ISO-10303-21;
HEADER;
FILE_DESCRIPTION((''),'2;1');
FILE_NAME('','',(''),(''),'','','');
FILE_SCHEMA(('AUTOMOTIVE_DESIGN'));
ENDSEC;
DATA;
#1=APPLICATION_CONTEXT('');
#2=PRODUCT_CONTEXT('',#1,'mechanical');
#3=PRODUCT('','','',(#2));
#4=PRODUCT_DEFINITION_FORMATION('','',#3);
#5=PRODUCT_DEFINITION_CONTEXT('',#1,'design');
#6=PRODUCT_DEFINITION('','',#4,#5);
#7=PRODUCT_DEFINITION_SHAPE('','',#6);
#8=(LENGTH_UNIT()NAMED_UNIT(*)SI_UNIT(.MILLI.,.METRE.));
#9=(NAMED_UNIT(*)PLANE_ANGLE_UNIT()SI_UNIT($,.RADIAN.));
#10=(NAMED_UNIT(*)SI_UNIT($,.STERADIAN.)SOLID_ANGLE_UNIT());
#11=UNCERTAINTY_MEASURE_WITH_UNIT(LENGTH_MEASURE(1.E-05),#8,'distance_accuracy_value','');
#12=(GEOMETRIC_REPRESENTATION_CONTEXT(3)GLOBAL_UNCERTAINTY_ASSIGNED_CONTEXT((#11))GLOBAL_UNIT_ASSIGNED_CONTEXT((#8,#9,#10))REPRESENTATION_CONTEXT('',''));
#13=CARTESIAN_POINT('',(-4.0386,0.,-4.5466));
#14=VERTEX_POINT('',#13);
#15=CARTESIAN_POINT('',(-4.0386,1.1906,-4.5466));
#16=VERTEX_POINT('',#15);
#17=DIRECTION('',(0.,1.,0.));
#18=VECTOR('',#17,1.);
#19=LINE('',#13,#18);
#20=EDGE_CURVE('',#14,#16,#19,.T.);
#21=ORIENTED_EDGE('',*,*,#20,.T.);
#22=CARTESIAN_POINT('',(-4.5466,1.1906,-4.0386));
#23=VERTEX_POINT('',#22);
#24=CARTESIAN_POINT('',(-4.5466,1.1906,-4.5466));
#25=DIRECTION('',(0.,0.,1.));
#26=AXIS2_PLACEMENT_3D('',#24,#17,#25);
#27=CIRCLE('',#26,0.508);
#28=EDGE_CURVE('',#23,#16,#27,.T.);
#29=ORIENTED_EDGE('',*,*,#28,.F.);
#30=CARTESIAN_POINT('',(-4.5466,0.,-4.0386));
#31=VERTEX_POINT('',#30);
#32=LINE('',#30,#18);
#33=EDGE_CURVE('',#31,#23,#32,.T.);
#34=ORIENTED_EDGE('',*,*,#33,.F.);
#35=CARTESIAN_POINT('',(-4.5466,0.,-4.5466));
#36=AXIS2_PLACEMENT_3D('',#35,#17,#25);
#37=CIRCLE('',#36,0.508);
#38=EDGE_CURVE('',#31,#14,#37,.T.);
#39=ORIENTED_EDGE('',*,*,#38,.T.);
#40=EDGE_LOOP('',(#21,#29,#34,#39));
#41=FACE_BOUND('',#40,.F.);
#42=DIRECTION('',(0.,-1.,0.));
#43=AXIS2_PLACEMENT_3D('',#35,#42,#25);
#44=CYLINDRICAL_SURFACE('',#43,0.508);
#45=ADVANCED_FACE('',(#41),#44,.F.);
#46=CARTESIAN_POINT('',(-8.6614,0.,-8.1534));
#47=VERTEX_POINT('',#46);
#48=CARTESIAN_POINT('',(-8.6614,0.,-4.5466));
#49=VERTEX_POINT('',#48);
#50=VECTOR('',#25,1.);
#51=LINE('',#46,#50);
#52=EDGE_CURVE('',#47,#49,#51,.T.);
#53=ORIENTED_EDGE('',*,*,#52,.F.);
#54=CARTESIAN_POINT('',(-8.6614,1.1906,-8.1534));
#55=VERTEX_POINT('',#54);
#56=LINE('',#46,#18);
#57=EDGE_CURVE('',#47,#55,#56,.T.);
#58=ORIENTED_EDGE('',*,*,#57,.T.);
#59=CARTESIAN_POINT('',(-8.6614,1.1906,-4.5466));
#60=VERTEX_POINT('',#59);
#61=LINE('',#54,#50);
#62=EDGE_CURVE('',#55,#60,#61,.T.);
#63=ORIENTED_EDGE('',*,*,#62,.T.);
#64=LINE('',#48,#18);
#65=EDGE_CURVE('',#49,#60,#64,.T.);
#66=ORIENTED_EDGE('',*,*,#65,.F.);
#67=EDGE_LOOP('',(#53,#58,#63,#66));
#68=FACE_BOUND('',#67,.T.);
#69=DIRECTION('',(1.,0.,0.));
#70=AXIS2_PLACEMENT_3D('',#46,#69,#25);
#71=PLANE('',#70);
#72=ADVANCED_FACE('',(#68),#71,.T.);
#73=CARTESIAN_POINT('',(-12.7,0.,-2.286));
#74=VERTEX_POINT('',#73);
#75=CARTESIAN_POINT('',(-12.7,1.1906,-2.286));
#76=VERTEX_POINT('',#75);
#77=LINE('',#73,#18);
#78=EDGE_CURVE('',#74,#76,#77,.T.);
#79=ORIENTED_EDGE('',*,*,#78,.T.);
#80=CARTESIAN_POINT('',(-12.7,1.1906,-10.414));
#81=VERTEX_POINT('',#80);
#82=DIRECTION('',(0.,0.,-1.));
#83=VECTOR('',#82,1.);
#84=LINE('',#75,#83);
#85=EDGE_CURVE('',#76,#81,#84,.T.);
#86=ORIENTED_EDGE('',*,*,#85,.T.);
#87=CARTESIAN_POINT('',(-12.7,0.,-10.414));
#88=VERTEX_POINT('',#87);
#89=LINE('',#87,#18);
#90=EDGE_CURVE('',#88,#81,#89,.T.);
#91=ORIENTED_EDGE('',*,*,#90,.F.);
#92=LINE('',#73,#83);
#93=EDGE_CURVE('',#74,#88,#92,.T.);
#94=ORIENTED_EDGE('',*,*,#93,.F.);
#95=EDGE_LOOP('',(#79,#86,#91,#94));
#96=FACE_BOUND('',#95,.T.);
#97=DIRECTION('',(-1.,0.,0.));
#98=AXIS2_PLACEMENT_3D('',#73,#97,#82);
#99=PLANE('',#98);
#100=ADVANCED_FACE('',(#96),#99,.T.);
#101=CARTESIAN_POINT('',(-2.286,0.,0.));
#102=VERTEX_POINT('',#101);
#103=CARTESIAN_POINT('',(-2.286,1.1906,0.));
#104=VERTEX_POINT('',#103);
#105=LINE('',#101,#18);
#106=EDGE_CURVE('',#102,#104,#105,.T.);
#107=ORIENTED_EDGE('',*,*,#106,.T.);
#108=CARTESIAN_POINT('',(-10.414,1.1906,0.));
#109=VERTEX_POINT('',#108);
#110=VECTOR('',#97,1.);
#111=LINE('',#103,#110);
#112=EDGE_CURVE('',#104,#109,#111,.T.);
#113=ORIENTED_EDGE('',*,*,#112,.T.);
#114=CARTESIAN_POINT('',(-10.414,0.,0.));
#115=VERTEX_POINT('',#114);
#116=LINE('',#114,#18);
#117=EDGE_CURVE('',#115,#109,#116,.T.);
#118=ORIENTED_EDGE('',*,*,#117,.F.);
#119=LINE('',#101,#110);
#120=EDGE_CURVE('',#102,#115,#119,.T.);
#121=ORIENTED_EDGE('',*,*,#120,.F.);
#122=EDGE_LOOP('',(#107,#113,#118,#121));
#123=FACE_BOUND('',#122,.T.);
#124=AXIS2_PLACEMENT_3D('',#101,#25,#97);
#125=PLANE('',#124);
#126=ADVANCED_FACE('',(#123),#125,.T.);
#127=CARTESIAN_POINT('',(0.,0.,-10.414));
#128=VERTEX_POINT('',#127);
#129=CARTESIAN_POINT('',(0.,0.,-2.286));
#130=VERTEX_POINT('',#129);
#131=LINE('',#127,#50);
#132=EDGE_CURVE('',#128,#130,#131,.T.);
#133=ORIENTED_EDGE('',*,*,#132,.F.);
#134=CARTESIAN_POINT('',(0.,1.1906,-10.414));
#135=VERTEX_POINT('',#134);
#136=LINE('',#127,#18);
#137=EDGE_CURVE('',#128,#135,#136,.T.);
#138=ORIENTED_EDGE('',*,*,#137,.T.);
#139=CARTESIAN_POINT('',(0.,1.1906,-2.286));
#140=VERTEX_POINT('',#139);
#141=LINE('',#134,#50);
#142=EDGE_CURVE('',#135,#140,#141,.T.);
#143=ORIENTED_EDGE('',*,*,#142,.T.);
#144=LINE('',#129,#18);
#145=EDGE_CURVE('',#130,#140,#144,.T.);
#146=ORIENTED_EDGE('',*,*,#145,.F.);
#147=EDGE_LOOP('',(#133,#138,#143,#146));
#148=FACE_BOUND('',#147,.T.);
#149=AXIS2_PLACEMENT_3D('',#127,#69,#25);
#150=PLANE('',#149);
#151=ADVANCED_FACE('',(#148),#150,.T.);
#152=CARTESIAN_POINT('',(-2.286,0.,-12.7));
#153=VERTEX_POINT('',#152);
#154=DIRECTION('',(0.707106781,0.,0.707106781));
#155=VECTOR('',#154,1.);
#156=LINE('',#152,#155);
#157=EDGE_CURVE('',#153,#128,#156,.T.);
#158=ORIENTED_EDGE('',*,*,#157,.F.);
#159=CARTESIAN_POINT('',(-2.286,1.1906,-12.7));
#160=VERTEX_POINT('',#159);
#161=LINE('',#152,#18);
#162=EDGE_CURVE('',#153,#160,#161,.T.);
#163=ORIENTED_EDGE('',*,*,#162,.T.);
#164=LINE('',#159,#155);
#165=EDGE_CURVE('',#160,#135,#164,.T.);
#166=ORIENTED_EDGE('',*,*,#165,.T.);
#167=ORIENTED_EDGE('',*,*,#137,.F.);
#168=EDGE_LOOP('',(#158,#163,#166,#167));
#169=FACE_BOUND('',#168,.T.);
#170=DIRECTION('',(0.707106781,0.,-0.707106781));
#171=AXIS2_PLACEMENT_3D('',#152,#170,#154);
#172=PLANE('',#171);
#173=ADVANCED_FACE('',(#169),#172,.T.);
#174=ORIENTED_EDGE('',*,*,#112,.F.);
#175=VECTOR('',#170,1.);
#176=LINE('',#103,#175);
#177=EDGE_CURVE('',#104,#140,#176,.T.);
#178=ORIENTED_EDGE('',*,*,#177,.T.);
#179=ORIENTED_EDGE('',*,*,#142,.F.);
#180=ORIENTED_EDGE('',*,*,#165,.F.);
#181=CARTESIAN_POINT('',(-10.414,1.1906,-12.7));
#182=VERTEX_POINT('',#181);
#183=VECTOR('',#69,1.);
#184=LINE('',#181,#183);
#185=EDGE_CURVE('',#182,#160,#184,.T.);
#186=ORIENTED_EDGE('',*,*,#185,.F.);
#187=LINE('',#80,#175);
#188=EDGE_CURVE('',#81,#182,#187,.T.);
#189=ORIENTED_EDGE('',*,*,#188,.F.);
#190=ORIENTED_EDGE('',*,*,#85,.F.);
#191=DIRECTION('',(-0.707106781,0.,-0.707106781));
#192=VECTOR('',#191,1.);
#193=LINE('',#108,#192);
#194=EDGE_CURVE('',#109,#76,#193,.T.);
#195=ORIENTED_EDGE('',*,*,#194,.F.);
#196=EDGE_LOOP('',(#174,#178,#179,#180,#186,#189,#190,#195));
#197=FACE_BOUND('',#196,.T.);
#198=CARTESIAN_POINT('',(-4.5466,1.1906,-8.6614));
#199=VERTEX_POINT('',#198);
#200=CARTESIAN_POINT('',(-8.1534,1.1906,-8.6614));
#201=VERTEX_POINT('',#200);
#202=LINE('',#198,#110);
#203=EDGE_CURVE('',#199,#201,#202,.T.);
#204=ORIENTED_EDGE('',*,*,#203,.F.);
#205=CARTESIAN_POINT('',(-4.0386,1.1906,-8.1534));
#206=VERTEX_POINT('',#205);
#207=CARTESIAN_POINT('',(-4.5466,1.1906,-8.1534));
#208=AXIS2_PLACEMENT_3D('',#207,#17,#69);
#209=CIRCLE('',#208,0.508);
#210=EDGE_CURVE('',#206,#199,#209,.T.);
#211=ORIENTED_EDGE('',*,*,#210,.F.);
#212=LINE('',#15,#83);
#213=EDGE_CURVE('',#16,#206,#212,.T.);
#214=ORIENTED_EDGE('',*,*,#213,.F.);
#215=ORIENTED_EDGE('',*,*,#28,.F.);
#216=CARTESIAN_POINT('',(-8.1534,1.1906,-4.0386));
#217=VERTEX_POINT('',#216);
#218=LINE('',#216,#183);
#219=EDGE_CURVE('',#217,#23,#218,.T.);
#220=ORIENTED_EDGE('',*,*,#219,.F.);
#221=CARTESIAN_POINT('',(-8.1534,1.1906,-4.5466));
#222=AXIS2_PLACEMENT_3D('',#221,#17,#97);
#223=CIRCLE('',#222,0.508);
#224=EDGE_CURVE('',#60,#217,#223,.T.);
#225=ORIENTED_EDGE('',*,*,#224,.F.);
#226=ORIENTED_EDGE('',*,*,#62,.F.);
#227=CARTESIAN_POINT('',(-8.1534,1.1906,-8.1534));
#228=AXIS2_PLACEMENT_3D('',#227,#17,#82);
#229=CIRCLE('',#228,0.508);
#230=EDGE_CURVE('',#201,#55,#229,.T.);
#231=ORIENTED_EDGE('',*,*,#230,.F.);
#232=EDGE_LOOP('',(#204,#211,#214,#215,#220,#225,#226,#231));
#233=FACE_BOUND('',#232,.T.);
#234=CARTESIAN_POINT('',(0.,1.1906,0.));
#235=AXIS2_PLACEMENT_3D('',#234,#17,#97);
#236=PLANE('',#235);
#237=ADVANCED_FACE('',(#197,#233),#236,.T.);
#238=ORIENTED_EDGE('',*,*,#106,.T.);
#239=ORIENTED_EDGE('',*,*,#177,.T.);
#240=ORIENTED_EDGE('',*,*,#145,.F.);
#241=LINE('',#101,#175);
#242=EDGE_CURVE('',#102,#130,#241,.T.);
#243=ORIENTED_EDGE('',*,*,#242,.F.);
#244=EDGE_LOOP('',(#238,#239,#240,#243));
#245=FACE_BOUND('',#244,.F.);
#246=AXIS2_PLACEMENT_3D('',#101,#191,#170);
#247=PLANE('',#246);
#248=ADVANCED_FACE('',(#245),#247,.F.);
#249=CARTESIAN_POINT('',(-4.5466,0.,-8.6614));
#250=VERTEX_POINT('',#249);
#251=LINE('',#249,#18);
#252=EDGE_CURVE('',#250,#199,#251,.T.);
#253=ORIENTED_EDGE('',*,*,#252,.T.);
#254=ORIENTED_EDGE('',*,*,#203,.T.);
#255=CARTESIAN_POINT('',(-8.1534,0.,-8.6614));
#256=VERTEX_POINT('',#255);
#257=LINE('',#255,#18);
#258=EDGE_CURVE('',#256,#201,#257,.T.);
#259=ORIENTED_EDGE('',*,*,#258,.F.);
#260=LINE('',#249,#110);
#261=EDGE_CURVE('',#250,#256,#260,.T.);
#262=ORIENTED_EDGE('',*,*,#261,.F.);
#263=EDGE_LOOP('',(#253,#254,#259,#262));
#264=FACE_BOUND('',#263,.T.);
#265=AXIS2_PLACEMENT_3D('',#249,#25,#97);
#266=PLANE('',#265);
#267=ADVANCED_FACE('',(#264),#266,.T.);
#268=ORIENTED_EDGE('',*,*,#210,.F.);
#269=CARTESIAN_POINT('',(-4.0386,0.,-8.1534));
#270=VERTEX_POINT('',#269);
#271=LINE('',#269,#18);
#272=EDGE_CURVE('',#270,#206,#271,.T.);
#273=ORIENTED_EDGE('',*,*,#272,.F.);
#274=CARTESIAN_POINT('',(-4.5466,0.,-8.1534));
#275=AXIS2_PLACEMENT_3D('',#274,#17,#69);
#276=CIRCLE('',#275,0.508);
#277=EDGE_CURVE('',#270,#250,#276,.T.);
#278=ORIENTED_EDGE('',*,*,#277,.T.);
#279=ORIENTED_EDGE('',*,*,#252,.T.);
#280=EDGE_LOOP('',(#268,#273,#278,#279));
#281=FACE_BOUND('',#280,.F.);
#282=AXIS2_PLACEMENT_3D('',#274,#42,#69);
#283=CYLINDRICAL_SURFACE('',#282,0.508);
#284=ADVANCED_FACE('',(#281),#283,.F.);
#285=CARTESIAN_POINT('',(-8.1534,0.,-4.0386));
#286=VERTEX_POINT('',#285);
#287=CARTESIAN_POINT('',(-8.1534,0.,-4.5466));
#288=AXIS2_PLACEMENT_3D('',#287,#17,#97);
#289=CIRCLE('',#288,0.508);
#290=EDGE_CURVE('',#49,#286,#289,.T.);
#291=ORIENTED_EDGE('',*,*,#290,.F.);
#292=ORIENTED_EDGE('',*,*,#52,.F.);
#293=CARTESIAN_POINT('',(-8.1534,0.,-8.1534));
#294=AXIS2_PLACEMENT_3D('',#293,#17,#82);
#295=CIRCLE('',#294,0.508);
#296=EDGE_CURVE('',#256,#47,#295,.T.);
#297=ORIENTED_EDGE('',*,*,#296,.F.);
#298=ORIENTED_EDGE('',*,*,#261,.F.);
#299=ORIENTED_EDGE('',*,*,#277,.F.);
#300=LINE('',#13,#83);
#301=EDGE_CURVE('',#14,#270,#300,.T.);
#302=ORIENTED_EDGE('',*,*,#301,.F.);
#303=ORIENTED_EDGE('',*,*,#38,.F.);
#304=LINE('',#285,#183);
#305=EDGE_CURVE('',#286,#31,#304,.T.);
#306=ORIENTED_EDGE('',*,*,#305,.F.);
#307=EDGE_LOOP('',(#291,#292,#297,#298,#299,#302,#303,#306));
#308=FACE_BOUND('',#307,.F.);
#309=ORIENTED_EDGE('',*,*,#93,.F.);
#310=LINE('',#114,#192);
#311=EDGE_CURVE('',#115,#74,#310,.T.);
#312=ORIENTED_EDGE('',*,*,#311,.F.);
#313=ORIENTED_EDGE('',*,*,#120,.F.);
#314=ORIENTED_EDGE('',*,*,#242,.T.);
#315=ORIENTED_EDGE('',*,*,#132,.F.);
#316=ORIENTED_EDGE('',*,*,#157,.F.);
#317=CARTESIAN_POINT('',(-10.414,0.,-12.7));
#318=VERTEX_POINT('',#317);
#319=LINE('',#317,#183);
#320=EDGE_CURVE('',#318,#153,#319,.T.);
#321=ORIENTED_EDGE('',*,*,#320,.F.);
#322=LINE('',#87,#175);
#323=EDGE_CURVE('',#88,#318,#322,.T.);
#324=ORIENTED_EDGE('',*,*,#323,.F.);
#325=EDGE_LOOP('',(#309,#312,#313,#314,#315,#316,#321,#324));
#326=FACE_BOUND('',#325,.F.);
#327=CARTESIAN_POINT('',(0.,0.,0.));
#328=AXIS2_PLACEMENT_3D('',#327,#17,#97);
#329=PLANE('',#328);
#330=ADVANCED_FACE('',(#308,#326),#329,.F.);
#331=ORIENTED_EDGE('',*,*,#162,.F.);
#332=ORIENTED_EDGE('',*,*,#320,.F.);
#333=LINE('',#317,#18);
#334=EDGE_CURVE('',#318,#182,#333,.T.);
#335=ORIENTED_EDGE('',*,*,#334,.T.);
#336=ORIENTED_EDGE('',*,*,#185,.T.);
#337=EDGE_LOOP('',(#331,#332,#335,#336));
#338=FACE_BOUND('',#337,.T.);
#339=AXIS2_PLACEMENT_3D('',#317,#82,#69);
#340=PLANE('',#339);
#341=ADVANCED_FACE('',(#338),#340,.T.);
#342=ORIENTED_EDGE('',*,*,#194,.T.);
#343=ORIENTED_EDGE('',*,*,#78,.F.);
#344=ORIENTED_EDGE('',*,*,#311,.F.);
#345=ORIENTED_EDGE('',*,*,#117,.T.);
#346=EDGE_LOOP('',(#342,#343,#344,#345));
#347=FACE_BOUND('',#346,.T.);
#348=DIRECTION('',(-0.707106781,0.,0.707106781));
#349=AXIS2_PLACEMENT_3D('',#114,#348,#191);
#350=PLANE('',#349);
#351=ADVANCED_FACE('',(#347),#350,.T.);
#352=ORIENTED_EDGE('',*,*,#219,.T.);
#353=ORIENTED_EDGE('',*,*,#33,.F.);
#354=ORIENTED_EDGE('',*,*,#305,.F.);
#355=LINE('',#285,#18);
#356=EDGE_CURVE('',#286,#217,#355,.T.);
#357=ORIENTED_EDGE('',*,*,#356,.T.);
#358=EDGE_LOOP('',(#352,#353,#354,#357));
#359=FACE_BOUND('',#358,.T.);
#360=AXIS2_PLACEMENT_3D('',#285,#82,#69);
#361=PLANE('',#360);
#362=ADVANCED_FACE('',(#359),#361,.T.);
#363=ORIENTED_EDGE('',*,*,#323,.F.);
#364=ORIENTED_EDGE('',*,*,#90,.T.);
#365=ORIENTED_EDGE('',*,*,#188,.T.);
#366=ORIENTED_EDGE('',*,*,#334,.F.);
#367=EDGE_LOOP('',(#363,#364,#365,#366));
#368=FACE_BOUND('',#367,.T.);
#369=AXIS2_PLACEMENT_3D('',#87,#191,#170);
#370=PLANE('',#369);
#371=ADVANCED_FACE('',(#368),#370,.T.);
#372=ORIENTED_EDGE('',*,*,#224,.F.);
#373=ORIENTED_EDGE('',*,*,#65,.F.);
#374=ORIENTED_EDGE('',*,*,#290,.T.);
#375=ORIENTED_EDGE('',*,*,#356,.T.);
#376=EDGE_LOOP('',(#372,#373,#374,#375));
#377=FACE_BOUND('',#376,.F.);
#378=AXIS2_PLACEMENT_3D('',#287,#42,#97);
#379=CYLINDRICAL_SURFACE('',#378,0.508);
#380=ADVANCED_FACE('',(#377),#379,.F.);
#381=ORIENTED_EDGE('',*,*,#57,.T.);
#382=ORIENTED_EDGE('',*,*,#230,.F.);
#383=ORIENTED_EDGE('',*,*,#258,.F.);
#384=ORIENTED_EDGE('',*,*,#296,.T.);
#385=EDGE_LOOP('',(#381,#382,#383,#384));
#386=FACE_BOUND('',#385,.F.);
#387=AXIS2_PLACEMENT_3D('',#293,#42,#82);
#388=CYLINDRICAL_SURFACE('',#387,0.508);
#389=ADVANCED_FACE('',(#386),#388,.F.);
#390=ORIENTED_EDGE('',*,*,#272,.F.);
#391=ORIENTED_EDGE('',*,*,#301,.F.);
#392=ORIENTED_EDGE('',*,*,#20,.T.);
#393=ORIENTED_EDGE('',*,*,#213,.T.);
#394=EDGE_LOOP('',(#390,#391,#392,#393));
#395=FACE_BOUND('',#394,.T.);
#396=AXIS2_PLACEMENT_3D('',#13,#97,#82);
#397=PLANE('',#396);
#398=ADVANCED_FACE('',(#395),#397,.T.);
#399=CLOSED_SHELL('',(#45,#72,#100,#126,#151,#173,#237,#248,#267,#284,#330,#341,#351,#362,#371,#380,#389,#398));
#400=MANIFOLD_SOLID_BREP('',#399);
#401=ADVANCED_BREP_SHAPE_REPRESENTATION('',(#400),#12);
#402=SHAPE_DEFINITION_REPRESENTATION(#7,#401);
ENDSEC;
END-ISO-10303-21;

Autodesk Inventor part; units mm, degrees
ref_plane "YZ Plane" through (0, 0, 0) normal (1, 0, 0) x (0, 1, 0)
ref_plane "XZ Plane" through (0, 0, 0) normal (0, 1, 0) x (-1, 0, 0)
ref_plane "XY Plane" through (0, 0, 0) normal (0, 0, 1) x (1, 0, 0)
sketch "Sketch1" plane through (0, 0, 0) normal (0, 1, 0) x (-1, 0, 0)
  line L0 (2.286, 0) -> (10.414, 0)
  line L1 (12.7, -2.286) -> (12.7, -10.414)
  line L2 (10.414, -12.7) -> (2.286, -12.7)
  line L3 (0, -10.414) -> (0, -2.286)
  line L4 (8.1534, -4.0386) -> (4.5466, -4.0386)
  line L5 (4.0386, -4.5466) -> (4.0386, -8.1534)
  line L6 (4.5466, -8.6614) -> (8.1534, -8.6614)
  line L7 (8.6614, -8.1534) -> (8.6614, -4.5466)
  line L8 (10.414, 0) -> (12.7, -2.286)
  line L9 (12.7, -10.414) -> (10.414, -12.7)
  line L10 (2.286, -12.7) -> (0, -10.414)
  line L11 (2.286, 0) -> (0, -2.286)
  arc A0 (8.6614, -4.5466) -> (8.1534, -4.0386) centre (8.1534, -4.5466) ccw
  arc A1 (8.1534, -8.6614) -> (8.6614, -8.1534) centre (8.1534, -8.1534) ccw
  arc A2 (4.0386, -8.1534) -> (4.5466, -8.6614) centre (4.5466, -8.1534) ccw
  arc A3 (4.5466, -4.0386) -> (4.0386, -4.5466) centre (4.5466, -4.5466) ccw
  line L12 (8.1534, -4.5466) -> (4.5466, -8.1534) construction
  line L13 (12.7, -10.414) -> (0, -2.286) construction
  point P0 (0, 0)
  point P1 (12.7, -12.7)
  point P2 (12.7, 0)
  point P3 (0, -12.7)
  point P4 (4.0386, -8.6614)
  point P5 (8.6614, -8.6614)
  point P6 (6.35, -6.35)
  dimension "d1" = 12.7
  dimension "d2" = 4.6228
  dimension "d3" = 2.286
  dimension "d4" = 2.286
  dimension "d5" = 2.286
  dimension "d6" = 2.286
  dimension "d7" = 2.286
  dimension "d8" = 2.286
  dimension "d9" = 2.286
  dimension "d10" = 2.286
  dimension "d11" = 0.508
extrude "Body" add sketch "Sketch1" along normal blind 1.1906
sketch "Sketch2" plane through (0, 1.1906, 0) normal (0, 1, 0) x (1, 0, 0)
  arc A0 (-8.1534, 8.6614) -> (-8.6614, 8.1534) centre (-8.1534, 8.1534) ccw construction
  arc A1 (-4.5466, 4.0386) -> (-4.0386, 4.5466) centre (-4.5466, 4.5466) ccw construction
  circle A2 centre (-6.35, 6.35) radius 2.1844
  line L0 (-8.1534, 8.1534) -> (-4.5466, 4.5466) construction
  point P0 (0, 0)
  dimension "d14" = 4.3688
surface extrude "Circle" sketch "Sketch2" against normal up to surface (1.1906 mm away) shown yes curves A2
pattern_of_one "Rectangular Pattern1"
equation "\"d4\" = d3"
equation "\"d5\" = d3"
equation "\"d6\" = d5"
equation "\"d7\" = d3"
equation "\"d8\" = d7"
equation "\"d9\" = d3"
equation "\"d10\" = d9"
equation "\"d22\" = d19"
equation "\"d19\" = 12.7"
